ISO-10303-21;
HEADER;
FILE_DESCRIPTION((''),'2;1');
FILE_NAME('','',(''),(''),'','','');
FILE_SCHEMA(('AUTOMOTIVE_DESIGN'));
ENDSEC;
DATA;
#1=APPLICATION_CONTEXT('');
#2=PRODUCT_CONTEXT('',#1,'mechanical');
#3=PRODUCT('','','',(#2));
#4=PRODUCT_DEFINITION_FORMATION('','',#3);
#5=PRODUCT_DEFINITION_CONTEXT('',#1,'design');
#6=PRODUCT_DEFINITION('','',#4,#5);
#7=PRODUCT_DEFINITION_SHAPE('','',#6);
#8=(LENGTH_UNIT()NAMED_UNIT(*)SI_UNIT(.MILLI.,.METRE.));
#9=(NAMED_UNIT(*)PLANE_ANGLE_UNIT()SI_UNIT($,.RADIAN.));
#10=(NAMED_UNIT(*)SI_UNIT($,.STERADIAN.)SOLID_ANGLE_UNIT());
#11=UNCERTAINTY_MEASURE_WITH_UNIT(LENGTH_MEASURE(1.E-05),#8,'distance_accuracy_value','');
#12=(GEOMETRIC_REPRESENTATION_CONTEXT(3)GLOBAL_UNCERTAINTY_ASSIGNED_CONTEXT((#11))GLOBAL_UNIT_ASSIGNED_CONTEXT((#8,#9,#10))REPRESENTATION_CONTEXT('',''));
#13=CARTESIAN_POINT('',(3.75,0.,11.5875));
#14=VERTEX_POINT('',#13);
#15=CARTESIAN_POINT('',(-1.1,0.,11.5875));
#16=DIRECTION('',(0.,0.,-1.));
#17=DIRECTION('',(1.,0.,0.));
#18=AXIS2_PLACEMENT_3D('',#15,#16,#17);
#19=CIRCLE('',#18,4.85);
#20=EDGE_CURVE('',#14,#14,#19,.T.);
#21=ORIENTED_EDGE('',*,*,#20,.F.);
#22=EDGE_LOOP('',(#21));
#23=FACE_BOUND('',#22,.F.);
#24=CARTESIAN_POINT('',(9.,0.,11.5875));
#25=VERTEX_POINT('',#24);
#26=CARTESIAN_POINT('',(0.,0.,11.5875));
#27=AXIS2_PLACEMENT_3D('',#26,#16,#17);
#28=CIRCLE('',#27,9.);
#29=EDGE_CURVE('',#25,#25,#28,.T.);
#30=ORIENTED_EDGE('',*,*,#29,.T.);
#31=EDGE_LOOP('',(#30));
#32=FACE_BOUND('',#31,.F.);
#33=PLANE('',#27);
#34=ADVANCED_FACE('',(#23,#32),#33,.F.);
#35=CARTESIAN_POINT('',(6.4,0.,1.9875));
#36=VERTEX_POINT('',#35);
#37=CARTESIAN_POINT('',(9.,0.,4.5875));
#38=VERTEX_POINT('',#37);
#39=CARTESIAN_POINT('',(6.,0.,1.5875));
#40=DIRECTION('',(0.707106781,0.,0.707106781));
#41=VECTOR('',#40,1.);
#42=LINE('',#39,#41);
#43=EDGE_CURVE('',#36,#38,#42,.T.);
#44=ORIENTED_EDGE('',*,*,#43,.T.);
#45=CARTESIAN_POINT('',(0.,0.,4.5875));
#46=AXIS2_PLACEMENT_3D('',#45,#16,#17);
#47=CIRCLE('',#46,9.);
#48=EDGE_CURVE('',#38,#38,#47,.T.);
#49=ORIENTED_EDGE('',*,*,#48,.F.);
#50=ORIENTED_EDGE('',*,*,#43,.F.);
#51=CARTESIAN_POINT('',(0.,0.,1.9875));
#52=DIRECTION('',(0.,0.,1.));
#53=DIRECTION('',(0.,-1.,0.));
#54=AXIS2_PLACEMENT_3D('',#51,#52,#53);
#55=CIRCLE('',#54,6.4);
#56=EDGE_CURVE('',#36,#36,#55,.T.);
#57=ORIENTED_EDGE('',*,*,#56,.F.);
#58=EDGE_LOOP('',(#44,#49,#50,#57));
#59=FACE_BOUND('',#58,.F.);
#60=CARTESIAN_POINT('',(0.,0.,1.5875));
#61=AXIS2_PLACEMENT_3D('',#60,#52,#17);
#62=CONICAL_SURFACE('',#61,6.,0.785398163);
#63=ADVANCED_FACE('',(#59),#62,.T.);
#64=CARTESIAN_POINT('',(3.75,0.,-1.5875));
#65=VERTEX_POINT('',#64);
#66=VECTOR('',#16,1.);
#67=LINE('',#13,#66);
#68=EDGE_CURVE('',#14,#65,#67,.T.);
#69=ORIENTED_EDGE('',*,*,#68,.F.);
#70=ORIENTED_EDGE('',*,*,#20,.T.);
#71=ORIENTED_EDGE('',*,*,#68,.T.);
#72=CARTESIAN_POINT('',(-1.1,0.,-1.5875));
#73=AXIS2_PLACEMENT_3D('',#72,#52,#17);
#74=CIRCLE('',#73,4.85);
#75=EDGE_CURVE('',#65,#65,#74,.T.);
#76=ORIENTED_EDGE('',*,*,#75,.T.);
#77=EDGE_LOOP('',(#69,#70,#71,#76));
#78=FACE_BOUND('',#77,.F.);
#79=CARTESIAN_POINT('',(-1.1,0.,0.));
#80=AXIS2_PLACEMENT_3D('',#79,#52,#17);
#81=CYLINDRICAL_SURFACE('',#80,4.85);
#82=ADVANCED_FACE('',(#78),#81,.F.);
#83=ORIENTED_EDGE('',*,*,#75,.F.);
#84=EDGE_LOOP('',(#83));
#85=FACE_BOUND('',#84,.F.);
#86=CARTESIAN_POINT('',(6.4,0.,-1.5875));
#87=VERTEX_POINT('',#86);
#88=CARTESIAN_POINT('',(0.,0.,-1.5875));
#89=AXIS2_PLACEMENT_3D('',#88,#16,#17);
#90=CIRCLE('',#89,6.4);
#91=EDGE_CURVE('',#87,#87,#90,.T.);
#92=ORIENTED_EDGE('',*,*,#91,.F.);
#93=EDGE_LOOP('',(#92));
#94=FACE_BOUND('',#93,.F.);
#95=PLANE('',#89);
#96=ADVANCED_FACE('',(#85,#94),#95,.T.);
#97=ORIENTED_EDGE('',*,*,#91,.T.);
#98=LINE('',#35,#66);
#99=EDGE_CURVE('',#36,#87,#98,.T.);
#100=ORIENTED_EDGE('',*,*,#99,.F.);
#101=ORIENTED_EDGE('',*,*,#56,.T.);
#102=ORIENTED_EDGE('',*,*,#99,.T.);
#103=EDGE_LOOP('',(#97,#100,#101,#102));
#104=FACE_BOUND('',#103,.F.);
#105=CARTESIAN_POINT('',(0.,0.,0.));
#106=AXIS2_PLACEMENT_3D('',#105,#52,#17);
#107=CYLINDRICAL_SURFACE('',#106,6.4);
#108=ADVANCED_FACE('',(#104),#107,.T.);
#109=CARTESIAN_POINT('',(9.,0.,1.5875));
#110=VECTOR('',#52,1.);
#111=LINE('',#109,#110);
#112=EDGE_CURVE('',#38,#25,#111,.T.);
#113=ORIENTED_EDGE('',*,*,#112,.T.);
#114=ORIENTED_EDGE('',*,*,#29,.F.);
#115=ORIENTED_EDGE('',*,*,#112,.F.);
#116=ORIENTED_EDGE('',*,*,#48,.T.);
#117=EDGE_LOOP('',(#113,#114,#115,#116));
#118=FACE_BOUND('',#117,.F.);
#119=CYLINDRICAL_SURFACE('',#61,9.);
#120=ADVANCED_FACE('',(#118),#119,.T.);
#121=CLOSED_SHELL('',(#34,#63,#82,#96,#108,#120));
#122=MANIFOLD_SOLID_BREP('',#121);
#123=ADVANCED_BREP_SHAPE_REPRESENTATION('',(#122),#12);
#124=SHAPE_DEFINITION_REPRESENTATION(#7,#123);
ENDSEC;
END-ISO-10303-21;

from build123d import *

# Parameters (mm, degrees)
F0_W          = 6.4
F0_H          = 3.175
F2_S5_R       = 6.4
F2_T6_DEPTH   = 14
F3_R          = 4.85
F4_DEPTH      = 25
F4_DEPTH_BACK = 25


# Not quite as in the source:
# - a fillet or chamfer that OpenCascade refuses, or shapes differently, is made with other operations: its cross-section is extruded or revolved along the edge and cut away or added


with BuildPart() as f1:
    # F0 (on Front) → F1 (revolve)
    with BuildSketch(Plane.XZ):
        with Locations((3.2, 0)):
            Rectangle(F0_W, F0_H)
        Polygon((0, 1.5875), (6.4, 1.5875), (9, 1.5875), (9, 11.5875), (0, 11.5875), align=None)
    revolve(axis=Axis((0, 0, 6.5875), (0, 0, -1)))

    # F2: chamfer of 3 on 1 edges, made by hand


with BuildPart() as f2_tool2:
    # F2_s3 → F2_t4 (revolve)
    with BuildSketch(Plane.XZ):
        Polygon((6, 1.5875), (9, 4.5875), (9, 1.5875), align=None)
    revolve(axis=Axis((0, 0, 1.5875), (0, 0, -1)))

    # F2_s5 → F2_t6 (cut, symmetric)
    with BuildSketch(Plane.XY.offset(3.1)):
        Circle(F2_S5_R)
    extrude(amount=F2_T6_DEPTH, both=True, mode=Mode.SUBTRACT)


with BuildPart() as f1_1:
    add(f1.part)

    # F2_t1: cut F2_tool2
    add(f2_tool2.part, mode=Mode.SUBTRACT)

    # F3 (on Top) → F4 (cut, two sides)
    with BuildSketch(Plane.XY) as f4_sk:
        with Locations((-1.1, 0)):
            Circle(F3_R)
    extrude(amount=-F4_DEPTH, mode=Mode.SUBTRACT)
    extrude(f4_sk.sketch, amount=F4_DEPTH_BACK, mode=Mode.SUBTRACT)


solid = f1_1.part
